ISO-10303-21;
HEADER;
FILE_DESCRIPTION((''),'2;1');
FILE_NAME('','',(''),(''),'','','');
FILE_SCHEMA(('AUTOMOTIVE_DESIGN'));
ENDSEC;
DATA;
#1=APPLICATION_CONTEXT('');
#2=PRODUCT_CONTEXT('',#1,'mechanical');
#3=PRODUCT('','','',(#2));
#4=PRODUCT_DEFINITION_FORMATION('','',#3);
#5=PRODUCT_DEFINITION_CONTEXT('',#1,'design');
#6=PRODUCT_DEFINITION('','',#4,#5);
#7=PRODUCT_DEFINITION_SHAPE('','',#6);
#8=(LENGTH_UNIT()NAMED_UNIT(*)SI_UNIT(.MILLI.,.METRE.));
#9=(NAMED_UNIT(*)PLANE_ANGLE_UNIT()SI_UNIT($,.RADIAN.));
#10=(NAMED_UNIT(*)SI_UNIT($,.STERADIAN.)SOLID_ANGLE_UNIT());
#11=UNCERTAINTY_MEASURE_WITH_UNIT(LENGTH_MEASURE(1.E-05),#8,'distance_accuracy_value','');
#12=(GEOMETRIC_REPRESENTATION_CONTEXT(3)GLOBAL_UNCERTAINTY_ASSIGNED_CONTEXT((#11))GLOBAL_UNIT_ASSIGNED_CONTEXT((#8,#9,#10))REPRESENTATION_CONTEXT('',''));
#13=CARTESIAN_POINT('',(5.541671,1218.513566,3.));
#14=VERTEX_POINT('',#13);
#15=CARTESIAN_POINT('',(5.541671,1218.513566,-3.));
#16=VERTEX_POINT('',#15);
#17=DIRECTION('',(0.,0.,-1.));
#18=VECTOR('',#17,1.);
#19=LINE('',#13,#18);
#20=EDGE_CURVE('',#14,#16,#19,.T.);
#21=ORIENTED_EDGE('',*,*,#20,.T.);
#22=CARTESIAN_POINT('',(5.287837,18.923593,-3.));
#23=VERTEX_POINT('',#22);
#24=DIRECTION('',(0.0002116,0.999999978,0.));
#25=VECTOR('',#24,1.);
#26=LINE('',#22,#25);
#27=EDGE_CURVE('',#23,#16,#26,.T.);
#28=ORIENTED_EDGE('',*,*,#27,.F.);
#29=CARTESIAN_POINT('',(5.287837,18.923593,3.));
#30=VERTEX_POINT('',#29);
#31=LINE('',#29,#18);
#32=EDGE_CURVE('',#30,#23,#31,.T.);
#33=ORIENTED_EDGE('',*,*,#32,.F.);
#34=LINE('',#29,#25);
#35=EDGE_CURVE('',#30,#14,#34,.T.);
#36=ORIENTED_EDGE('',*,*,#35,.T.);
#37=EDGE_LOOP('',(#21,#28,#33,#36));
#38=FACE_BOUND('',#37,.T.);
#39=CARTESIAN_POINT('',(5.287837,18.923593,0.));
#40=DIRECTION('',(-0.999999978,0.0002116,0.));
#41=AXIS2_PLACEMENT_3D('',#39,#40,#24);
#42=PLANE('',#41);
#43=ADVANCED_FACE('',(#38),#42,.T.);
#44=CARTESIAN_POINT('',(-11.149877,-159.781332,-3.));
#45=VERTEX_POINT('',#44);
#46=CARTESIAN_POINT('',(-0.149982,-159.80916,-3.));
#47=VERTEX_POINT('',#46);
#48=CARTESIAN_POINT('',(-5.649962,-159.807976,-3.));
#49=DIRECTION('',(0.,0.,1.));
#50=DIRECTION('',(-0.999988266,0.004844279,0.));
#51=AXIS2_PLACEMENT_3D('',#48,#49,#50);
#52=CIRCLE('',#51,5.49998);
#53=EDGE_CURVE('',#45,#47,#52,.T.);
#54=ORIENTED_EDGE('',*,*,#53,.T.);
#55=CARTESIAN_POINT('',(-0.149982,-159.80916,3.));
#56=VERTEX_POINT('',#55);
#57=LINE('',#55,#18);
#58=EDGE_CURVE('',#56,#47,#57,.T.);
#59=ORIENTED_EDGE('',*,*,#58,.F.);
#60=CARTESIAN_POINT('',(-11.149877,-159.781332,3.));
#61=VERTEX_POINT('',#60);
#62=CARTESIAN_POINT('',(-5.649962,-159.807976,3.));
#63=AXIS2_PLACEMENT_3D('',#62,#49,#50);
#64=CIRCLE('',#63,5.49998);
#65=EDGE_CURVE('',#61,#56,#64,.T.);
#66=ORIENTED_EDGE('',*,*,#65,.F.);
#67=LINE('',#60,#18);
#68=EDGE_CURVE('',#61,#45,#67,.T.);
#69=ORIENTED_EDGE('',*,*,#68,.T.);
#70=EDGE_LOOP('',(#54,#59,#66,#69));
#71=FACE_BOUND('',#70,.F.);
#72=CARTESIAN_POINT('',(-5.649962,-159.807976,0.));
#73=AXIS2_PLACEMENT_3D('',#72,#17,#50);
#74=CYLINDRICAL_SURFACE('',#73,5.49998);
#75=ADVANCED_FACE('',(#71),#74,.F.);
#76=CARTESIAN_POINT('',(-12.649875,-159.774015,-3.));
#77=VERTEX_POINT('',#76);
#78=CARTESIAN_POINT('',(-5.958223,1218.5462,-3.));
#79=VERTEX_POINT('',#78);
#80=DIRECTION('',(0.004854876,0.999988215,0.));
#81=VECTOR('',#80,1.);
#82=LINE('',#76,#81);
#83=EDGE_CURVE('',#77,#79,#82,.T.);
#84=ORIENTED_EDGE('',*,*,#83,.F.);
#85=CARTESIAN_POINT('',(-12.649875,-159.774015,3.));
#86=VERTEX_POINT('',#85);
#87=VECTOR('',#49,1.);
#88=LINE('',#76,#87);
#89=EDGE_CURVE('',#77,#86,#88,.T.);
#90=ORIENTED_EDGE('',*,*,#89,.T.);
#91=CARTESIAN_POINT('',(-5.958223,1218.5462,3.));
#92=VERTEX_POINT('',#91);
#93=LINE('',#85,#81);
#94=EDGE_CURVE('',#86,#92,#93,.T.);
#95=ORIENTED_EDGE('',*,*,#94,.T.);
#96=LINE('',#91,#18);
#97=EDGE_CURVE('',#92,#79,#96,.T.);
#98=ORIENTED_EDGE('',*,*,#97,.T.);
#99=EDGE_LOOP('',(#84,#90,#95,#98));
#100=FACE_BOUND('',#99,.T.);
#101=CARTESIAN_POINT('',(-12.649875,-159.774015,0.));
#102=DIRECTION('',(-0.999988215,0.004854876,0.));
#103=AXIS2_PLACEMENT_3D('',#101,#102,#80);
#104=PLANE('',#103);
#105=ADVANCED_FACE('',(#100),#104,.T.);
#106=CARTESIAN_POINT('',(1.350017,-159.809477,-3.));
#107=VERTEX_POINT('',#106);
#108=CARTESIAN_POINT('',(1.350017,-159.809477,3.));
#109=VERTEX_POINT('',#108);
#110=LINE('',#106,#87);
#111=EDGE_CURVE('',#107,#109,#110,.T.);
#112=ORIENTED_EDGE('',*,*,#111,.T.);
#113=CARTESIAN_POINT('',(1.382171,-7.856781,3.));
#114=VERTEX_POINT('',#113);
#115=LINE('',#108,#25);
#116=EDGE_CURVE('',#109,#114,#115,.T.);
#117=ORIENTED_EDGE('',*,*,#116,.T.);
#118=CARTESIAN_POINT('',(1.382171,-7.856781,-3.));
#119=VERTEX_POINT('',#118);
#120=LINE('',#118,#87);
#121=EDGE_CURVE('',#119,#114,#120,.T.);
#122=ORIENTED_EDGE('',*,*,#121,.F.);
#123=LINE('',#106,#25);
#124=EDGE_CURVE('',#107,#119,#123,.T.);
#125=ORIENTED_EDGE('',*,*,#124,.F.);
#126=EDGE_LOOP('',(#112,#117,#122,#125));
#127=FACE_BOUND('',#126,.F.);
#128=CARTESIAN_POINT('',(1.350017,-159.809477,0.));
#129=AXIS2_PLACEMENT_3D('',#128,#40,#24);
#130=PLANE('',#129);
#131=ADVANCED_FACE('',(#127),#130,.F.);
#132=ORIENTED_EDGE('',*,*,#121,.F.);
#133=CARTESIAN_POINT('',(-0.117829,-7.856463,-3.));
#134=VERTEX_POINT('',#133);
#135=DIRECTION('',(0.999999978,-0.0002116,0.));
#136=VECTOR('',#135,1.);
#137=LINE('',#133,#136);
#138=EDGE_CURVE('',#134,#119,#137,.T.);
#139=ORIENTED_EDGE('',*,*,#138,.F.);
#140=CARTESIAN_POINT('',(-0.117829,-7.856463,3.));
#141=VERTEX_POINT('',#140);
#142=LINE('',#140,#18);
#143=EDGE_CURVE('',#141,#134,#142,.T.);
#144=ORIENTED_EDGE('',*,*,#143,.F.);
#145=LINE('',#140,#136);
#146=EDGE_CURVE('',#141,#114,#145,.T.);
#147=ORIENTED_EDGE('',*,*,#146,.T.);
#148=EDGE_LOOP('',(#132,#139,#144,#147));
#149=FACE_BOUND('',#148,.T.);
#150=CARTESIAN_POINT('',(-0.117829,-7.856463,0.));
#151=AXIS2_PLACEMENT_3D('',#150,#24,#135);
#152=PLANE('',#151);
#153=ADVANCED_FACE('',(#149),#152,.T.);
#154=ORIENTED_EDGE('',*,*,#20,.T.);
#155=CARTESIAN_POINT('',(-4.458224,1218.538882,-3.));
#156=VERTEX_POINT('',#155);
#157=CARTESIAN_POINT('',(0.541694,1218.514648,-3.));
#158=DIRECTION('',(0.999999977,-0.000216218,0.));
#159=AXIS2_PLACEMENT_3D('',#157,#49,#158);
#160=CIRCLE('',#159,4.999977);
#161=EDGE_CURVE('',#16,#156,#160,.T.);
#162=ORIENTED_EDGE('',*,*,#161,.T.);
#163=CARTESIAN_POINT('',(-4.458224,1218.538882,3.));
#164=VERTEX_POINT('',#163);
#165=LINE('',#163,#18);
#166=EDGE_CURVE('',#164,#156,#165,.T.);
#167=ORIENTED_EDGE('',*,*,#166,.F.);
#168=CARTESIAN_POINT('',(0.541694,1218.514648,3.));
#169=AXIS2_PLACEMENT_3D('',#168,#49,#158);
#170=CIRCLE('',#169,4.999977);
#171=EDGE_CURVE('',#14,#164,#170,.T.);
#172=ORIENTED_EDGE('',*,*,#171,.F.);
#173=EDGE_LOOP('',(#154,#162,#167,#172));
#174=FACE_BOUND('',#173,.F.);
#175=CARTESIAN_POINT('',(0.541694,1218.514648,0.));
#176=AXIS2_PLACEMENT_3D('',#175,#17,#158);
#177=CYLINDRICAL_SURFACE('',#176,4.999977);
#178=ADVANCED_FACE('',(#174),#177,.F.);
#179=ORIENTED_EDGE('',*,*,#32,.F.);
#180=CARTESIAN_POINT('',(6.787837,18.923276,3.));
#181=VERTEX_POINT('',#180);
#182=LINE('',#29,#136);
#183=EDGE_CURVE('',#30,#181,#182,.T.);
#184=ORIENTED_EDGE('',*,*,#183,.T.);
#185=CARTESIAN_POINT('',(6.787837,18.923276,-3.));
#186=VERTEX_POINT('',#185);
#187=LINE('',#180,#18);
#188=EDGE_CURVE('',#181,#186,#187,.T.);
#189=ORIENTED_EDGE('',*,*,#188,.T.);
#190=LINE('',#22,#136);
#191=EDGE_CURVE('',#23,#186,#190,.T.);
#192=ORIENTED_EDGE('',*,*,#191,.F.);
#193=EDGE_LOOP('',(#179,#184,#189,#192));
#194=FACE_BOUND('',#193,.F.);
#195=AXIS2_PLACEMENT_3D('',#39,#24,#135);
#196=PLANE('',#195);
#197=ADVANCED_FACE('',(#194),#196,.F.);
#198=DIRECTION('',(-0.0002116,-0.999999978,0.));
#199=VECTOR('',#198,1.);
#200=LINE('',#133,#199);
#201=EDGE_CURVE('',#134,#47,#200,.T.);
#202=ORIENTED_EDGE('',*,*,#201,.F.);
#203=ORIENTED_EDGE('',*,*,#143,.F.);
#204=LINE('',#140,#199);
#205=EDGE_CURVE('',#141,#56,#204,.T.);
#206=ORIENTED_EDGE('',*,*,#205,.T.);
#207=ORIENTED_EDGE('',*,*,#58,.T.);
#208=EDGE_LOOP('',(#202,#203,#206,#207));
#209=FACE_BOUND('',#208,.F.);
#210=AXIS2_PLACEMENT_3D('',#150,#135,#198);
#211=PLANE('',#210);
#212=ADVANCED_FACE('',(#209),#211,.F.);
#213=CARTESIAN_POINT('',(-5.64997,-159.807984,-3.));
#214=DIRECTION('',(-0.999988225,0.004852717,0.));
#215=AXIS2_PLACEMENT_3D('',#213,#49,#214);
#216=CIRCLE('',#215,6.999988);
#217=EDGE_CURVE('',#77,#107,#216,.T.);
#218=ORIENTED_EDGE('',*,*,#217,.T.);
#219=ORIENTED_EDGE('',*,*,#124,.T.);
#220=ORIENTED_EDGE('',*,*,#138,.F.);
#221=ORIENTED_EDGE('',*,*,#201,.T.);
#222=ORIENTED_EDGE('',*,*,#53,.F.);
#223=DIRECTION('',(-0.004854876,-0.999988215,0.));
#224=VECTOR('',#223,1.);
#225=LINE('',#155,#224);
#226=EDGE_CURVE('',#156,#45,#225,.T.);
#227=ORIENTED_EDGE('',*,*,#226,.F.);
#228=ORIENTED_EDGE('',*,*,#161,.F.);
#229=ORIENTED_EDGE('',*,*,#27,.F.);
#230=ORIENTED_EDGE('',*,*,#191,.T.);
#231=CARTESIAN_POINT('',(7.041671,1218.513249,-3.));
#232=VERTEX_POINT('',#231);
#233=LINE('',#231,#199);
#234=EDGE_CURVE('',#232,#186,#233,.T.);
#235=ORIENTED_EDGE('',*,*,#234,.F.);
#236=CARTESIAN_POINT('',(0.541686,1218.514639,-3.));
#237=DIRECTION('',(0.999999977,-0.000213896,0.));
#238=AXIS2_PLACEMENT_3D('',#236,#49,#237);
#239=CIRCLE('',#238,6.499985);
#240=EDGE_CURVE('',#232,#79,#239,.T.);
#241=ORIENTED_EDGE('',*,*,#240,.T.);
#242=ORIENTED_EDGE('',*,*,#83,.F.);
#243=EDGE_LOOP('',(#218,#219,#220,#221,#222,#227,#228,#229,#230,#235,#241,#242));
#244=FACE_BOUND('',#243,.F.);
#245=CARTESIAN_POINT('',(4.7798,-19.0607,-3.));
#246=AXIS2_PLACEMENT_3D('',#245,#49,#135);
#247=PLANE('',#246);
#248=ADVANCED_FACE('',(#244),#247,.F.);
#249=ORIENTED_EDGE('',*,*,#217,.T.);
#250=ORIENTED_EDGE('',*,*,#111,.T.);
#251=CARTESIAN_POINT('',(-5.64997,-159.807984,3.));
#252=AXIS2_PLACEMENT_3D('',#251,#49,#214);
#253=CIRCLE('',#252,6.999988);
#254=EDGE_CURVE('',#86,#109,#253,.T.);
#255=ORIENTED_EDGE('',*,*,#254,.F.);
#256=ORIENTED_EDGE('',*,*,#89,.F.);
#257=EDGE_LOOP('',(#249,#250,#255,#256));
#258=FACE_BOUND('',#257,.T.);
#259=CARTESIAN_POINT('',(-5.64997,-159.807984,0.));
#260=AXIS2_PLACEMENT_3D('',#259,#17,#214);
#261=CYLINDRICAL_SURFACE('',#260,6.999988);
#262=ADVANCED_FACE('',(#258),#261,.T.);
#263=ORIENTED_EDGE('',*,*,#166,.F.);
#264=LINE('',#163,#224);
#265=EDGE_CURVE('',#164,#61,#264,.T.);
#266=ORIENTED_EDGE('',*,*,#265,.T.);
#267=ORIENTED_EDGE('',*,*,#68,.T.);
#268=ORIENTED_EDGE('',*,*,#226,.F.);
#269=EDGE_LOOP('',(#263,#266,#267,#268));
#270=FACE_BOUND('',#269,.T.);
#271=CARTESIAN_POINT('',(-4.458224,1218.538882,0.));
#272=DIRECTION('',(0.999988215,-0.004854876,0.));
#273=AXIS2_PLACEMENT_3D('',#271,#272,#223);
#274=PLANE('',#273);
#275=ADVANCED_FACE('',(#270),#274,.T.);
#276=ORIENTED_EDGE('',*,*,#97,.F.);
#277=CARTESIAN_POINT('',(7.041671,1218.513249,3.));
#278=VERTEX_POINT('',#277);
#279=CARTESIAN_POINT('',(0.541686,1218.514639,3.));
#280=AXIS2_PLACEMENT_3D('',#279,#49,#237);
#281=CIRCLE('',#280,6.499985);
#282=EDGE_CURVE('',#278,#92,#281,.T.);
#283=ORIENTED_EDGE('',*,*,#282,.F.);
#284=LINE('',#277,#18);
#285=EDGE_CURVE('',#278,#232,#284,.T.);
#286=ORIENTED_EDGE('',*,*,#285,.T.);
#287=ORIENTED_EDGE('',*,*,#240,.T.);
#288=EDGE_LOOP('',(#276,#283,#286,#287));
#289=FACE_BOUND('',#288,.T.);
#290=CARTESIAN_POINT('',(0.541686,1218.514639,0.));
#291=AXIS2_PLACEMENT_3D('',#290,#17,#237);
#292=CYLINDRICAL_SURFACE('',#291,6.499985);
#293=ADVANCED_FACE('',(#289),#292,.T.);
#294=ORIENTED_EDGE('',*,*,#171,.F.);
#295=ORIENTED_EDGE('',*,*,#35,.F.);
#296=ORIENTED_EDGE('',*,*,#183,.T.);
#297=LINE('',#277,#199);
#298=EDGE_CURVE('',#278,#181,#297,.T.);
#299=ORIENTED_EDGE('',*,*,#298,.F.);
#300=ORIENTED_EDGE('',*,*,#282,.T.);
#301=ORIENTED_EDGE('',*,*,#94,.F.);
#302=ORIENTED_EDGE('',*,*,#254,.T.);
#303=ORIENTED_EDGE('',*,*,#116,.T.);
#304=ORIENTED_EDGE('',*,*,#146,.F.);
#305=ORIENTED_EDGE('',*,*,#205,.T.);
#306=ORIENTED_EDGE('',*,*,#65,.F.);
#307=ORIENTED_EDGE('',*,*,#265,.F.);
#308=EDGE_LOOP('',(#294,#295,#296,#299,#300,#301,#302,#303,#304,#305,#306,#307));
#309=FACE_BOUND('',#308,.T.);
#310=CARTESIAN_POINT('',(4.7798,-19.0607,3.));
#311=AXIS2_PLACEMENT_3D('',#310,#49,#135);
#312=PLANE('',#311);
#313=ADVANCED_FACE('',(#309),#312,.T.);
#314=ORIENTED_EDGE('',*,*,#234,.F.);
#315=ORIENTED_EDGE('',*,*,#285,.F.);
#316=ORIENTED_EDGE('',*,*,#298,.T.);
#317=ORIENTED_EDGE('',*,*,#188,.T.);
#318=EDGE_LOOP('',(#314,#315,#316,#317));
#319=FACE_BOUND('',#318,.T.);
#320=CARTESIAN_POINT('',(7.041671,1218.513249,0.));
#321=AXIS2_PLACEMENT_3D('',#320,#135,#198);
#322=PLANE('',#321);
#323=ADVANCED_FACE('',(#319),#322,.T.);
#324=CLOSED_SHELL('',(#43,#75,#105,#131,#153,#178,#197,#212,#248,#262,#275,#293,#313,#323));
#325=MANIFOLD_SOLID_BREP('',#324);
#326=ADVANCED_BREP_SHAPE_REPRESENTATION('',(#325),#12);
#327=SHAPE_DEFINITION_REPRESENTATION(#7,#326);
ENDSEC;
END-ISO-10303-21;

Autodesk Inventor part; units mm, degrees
ref_plane "YZ Plane" through (0, 0, 0) normal (1, 0, 0) x (0, 1, 0)
ref_plane "XZ Plane" through (0, 0, 0) normal (0, 1, 0) x (-1, 0, 0)
ref_plane "Work Plane1" through (4.7798, -19.0607, 0) normal (0, 0, 1) x (1, -0.0002116, 0)
sketch "Sketch1" plane through (4.7798, -19.0607, 0) normal (0, 0, 1) x (1, -0.0002116, 0)
  circle A0 centre (-10.4, -140.7495) radius 4.3281 projected
  arc A1 (-17.3999, -140.717) -> (-3.4, -140.7495) centre (-10.4, -140.7495) ccw
  arc A2 (2, 1237.5744) -> (-10.9999, 1237.6046) centre (-4.5, 1237.5744) ccw
  line L0 (-17.3999, -140.717) -> (-10.9999, 1237.6046)
  line L1 (-3.4, -140.7495) -> (-3.4, 11.2032)
  line L2 (2, 1237.5744) -> (2, 37.9844)
  line L3 (0.5, 37.9844) -> (0.5, 1237.5744)
  arc A3 (0.5, 1237.5744) -> (-9.4999, 1237.5976) centre (-4.5, 1237.5744) ccw
  line L4 (-9.4999, 1237.5976) -> (-15.8999, -140.724)
  line L5 (-4.9, 11.2032) -> (-4.9, -140.7495)
  arc A4 (-15.8999, -140.724) -> (-4.9, -140.7495) centre (-10.4, -140.7495) ccw
  line L6 (-4.9, 11.2032) -> (-3.4, 11.2032)
  line L7 (0.5, 37.9844) -> (2, 37.9844)
  point P0 (-4.7838, 19.0597)
  dimension "d3" = 1.5
  dimension "d4" = 1.5
  dimension "d5" = 5.5
  dimension "d6" = 5
extrude "Extrusion1" add sketch "Sketch1" along normal mid plane 6 contours L0 A2 L2 L7 L3 A3 L4 A4 L5 L6 L1 A1
properties part number "FDM20-BandaX-01"
